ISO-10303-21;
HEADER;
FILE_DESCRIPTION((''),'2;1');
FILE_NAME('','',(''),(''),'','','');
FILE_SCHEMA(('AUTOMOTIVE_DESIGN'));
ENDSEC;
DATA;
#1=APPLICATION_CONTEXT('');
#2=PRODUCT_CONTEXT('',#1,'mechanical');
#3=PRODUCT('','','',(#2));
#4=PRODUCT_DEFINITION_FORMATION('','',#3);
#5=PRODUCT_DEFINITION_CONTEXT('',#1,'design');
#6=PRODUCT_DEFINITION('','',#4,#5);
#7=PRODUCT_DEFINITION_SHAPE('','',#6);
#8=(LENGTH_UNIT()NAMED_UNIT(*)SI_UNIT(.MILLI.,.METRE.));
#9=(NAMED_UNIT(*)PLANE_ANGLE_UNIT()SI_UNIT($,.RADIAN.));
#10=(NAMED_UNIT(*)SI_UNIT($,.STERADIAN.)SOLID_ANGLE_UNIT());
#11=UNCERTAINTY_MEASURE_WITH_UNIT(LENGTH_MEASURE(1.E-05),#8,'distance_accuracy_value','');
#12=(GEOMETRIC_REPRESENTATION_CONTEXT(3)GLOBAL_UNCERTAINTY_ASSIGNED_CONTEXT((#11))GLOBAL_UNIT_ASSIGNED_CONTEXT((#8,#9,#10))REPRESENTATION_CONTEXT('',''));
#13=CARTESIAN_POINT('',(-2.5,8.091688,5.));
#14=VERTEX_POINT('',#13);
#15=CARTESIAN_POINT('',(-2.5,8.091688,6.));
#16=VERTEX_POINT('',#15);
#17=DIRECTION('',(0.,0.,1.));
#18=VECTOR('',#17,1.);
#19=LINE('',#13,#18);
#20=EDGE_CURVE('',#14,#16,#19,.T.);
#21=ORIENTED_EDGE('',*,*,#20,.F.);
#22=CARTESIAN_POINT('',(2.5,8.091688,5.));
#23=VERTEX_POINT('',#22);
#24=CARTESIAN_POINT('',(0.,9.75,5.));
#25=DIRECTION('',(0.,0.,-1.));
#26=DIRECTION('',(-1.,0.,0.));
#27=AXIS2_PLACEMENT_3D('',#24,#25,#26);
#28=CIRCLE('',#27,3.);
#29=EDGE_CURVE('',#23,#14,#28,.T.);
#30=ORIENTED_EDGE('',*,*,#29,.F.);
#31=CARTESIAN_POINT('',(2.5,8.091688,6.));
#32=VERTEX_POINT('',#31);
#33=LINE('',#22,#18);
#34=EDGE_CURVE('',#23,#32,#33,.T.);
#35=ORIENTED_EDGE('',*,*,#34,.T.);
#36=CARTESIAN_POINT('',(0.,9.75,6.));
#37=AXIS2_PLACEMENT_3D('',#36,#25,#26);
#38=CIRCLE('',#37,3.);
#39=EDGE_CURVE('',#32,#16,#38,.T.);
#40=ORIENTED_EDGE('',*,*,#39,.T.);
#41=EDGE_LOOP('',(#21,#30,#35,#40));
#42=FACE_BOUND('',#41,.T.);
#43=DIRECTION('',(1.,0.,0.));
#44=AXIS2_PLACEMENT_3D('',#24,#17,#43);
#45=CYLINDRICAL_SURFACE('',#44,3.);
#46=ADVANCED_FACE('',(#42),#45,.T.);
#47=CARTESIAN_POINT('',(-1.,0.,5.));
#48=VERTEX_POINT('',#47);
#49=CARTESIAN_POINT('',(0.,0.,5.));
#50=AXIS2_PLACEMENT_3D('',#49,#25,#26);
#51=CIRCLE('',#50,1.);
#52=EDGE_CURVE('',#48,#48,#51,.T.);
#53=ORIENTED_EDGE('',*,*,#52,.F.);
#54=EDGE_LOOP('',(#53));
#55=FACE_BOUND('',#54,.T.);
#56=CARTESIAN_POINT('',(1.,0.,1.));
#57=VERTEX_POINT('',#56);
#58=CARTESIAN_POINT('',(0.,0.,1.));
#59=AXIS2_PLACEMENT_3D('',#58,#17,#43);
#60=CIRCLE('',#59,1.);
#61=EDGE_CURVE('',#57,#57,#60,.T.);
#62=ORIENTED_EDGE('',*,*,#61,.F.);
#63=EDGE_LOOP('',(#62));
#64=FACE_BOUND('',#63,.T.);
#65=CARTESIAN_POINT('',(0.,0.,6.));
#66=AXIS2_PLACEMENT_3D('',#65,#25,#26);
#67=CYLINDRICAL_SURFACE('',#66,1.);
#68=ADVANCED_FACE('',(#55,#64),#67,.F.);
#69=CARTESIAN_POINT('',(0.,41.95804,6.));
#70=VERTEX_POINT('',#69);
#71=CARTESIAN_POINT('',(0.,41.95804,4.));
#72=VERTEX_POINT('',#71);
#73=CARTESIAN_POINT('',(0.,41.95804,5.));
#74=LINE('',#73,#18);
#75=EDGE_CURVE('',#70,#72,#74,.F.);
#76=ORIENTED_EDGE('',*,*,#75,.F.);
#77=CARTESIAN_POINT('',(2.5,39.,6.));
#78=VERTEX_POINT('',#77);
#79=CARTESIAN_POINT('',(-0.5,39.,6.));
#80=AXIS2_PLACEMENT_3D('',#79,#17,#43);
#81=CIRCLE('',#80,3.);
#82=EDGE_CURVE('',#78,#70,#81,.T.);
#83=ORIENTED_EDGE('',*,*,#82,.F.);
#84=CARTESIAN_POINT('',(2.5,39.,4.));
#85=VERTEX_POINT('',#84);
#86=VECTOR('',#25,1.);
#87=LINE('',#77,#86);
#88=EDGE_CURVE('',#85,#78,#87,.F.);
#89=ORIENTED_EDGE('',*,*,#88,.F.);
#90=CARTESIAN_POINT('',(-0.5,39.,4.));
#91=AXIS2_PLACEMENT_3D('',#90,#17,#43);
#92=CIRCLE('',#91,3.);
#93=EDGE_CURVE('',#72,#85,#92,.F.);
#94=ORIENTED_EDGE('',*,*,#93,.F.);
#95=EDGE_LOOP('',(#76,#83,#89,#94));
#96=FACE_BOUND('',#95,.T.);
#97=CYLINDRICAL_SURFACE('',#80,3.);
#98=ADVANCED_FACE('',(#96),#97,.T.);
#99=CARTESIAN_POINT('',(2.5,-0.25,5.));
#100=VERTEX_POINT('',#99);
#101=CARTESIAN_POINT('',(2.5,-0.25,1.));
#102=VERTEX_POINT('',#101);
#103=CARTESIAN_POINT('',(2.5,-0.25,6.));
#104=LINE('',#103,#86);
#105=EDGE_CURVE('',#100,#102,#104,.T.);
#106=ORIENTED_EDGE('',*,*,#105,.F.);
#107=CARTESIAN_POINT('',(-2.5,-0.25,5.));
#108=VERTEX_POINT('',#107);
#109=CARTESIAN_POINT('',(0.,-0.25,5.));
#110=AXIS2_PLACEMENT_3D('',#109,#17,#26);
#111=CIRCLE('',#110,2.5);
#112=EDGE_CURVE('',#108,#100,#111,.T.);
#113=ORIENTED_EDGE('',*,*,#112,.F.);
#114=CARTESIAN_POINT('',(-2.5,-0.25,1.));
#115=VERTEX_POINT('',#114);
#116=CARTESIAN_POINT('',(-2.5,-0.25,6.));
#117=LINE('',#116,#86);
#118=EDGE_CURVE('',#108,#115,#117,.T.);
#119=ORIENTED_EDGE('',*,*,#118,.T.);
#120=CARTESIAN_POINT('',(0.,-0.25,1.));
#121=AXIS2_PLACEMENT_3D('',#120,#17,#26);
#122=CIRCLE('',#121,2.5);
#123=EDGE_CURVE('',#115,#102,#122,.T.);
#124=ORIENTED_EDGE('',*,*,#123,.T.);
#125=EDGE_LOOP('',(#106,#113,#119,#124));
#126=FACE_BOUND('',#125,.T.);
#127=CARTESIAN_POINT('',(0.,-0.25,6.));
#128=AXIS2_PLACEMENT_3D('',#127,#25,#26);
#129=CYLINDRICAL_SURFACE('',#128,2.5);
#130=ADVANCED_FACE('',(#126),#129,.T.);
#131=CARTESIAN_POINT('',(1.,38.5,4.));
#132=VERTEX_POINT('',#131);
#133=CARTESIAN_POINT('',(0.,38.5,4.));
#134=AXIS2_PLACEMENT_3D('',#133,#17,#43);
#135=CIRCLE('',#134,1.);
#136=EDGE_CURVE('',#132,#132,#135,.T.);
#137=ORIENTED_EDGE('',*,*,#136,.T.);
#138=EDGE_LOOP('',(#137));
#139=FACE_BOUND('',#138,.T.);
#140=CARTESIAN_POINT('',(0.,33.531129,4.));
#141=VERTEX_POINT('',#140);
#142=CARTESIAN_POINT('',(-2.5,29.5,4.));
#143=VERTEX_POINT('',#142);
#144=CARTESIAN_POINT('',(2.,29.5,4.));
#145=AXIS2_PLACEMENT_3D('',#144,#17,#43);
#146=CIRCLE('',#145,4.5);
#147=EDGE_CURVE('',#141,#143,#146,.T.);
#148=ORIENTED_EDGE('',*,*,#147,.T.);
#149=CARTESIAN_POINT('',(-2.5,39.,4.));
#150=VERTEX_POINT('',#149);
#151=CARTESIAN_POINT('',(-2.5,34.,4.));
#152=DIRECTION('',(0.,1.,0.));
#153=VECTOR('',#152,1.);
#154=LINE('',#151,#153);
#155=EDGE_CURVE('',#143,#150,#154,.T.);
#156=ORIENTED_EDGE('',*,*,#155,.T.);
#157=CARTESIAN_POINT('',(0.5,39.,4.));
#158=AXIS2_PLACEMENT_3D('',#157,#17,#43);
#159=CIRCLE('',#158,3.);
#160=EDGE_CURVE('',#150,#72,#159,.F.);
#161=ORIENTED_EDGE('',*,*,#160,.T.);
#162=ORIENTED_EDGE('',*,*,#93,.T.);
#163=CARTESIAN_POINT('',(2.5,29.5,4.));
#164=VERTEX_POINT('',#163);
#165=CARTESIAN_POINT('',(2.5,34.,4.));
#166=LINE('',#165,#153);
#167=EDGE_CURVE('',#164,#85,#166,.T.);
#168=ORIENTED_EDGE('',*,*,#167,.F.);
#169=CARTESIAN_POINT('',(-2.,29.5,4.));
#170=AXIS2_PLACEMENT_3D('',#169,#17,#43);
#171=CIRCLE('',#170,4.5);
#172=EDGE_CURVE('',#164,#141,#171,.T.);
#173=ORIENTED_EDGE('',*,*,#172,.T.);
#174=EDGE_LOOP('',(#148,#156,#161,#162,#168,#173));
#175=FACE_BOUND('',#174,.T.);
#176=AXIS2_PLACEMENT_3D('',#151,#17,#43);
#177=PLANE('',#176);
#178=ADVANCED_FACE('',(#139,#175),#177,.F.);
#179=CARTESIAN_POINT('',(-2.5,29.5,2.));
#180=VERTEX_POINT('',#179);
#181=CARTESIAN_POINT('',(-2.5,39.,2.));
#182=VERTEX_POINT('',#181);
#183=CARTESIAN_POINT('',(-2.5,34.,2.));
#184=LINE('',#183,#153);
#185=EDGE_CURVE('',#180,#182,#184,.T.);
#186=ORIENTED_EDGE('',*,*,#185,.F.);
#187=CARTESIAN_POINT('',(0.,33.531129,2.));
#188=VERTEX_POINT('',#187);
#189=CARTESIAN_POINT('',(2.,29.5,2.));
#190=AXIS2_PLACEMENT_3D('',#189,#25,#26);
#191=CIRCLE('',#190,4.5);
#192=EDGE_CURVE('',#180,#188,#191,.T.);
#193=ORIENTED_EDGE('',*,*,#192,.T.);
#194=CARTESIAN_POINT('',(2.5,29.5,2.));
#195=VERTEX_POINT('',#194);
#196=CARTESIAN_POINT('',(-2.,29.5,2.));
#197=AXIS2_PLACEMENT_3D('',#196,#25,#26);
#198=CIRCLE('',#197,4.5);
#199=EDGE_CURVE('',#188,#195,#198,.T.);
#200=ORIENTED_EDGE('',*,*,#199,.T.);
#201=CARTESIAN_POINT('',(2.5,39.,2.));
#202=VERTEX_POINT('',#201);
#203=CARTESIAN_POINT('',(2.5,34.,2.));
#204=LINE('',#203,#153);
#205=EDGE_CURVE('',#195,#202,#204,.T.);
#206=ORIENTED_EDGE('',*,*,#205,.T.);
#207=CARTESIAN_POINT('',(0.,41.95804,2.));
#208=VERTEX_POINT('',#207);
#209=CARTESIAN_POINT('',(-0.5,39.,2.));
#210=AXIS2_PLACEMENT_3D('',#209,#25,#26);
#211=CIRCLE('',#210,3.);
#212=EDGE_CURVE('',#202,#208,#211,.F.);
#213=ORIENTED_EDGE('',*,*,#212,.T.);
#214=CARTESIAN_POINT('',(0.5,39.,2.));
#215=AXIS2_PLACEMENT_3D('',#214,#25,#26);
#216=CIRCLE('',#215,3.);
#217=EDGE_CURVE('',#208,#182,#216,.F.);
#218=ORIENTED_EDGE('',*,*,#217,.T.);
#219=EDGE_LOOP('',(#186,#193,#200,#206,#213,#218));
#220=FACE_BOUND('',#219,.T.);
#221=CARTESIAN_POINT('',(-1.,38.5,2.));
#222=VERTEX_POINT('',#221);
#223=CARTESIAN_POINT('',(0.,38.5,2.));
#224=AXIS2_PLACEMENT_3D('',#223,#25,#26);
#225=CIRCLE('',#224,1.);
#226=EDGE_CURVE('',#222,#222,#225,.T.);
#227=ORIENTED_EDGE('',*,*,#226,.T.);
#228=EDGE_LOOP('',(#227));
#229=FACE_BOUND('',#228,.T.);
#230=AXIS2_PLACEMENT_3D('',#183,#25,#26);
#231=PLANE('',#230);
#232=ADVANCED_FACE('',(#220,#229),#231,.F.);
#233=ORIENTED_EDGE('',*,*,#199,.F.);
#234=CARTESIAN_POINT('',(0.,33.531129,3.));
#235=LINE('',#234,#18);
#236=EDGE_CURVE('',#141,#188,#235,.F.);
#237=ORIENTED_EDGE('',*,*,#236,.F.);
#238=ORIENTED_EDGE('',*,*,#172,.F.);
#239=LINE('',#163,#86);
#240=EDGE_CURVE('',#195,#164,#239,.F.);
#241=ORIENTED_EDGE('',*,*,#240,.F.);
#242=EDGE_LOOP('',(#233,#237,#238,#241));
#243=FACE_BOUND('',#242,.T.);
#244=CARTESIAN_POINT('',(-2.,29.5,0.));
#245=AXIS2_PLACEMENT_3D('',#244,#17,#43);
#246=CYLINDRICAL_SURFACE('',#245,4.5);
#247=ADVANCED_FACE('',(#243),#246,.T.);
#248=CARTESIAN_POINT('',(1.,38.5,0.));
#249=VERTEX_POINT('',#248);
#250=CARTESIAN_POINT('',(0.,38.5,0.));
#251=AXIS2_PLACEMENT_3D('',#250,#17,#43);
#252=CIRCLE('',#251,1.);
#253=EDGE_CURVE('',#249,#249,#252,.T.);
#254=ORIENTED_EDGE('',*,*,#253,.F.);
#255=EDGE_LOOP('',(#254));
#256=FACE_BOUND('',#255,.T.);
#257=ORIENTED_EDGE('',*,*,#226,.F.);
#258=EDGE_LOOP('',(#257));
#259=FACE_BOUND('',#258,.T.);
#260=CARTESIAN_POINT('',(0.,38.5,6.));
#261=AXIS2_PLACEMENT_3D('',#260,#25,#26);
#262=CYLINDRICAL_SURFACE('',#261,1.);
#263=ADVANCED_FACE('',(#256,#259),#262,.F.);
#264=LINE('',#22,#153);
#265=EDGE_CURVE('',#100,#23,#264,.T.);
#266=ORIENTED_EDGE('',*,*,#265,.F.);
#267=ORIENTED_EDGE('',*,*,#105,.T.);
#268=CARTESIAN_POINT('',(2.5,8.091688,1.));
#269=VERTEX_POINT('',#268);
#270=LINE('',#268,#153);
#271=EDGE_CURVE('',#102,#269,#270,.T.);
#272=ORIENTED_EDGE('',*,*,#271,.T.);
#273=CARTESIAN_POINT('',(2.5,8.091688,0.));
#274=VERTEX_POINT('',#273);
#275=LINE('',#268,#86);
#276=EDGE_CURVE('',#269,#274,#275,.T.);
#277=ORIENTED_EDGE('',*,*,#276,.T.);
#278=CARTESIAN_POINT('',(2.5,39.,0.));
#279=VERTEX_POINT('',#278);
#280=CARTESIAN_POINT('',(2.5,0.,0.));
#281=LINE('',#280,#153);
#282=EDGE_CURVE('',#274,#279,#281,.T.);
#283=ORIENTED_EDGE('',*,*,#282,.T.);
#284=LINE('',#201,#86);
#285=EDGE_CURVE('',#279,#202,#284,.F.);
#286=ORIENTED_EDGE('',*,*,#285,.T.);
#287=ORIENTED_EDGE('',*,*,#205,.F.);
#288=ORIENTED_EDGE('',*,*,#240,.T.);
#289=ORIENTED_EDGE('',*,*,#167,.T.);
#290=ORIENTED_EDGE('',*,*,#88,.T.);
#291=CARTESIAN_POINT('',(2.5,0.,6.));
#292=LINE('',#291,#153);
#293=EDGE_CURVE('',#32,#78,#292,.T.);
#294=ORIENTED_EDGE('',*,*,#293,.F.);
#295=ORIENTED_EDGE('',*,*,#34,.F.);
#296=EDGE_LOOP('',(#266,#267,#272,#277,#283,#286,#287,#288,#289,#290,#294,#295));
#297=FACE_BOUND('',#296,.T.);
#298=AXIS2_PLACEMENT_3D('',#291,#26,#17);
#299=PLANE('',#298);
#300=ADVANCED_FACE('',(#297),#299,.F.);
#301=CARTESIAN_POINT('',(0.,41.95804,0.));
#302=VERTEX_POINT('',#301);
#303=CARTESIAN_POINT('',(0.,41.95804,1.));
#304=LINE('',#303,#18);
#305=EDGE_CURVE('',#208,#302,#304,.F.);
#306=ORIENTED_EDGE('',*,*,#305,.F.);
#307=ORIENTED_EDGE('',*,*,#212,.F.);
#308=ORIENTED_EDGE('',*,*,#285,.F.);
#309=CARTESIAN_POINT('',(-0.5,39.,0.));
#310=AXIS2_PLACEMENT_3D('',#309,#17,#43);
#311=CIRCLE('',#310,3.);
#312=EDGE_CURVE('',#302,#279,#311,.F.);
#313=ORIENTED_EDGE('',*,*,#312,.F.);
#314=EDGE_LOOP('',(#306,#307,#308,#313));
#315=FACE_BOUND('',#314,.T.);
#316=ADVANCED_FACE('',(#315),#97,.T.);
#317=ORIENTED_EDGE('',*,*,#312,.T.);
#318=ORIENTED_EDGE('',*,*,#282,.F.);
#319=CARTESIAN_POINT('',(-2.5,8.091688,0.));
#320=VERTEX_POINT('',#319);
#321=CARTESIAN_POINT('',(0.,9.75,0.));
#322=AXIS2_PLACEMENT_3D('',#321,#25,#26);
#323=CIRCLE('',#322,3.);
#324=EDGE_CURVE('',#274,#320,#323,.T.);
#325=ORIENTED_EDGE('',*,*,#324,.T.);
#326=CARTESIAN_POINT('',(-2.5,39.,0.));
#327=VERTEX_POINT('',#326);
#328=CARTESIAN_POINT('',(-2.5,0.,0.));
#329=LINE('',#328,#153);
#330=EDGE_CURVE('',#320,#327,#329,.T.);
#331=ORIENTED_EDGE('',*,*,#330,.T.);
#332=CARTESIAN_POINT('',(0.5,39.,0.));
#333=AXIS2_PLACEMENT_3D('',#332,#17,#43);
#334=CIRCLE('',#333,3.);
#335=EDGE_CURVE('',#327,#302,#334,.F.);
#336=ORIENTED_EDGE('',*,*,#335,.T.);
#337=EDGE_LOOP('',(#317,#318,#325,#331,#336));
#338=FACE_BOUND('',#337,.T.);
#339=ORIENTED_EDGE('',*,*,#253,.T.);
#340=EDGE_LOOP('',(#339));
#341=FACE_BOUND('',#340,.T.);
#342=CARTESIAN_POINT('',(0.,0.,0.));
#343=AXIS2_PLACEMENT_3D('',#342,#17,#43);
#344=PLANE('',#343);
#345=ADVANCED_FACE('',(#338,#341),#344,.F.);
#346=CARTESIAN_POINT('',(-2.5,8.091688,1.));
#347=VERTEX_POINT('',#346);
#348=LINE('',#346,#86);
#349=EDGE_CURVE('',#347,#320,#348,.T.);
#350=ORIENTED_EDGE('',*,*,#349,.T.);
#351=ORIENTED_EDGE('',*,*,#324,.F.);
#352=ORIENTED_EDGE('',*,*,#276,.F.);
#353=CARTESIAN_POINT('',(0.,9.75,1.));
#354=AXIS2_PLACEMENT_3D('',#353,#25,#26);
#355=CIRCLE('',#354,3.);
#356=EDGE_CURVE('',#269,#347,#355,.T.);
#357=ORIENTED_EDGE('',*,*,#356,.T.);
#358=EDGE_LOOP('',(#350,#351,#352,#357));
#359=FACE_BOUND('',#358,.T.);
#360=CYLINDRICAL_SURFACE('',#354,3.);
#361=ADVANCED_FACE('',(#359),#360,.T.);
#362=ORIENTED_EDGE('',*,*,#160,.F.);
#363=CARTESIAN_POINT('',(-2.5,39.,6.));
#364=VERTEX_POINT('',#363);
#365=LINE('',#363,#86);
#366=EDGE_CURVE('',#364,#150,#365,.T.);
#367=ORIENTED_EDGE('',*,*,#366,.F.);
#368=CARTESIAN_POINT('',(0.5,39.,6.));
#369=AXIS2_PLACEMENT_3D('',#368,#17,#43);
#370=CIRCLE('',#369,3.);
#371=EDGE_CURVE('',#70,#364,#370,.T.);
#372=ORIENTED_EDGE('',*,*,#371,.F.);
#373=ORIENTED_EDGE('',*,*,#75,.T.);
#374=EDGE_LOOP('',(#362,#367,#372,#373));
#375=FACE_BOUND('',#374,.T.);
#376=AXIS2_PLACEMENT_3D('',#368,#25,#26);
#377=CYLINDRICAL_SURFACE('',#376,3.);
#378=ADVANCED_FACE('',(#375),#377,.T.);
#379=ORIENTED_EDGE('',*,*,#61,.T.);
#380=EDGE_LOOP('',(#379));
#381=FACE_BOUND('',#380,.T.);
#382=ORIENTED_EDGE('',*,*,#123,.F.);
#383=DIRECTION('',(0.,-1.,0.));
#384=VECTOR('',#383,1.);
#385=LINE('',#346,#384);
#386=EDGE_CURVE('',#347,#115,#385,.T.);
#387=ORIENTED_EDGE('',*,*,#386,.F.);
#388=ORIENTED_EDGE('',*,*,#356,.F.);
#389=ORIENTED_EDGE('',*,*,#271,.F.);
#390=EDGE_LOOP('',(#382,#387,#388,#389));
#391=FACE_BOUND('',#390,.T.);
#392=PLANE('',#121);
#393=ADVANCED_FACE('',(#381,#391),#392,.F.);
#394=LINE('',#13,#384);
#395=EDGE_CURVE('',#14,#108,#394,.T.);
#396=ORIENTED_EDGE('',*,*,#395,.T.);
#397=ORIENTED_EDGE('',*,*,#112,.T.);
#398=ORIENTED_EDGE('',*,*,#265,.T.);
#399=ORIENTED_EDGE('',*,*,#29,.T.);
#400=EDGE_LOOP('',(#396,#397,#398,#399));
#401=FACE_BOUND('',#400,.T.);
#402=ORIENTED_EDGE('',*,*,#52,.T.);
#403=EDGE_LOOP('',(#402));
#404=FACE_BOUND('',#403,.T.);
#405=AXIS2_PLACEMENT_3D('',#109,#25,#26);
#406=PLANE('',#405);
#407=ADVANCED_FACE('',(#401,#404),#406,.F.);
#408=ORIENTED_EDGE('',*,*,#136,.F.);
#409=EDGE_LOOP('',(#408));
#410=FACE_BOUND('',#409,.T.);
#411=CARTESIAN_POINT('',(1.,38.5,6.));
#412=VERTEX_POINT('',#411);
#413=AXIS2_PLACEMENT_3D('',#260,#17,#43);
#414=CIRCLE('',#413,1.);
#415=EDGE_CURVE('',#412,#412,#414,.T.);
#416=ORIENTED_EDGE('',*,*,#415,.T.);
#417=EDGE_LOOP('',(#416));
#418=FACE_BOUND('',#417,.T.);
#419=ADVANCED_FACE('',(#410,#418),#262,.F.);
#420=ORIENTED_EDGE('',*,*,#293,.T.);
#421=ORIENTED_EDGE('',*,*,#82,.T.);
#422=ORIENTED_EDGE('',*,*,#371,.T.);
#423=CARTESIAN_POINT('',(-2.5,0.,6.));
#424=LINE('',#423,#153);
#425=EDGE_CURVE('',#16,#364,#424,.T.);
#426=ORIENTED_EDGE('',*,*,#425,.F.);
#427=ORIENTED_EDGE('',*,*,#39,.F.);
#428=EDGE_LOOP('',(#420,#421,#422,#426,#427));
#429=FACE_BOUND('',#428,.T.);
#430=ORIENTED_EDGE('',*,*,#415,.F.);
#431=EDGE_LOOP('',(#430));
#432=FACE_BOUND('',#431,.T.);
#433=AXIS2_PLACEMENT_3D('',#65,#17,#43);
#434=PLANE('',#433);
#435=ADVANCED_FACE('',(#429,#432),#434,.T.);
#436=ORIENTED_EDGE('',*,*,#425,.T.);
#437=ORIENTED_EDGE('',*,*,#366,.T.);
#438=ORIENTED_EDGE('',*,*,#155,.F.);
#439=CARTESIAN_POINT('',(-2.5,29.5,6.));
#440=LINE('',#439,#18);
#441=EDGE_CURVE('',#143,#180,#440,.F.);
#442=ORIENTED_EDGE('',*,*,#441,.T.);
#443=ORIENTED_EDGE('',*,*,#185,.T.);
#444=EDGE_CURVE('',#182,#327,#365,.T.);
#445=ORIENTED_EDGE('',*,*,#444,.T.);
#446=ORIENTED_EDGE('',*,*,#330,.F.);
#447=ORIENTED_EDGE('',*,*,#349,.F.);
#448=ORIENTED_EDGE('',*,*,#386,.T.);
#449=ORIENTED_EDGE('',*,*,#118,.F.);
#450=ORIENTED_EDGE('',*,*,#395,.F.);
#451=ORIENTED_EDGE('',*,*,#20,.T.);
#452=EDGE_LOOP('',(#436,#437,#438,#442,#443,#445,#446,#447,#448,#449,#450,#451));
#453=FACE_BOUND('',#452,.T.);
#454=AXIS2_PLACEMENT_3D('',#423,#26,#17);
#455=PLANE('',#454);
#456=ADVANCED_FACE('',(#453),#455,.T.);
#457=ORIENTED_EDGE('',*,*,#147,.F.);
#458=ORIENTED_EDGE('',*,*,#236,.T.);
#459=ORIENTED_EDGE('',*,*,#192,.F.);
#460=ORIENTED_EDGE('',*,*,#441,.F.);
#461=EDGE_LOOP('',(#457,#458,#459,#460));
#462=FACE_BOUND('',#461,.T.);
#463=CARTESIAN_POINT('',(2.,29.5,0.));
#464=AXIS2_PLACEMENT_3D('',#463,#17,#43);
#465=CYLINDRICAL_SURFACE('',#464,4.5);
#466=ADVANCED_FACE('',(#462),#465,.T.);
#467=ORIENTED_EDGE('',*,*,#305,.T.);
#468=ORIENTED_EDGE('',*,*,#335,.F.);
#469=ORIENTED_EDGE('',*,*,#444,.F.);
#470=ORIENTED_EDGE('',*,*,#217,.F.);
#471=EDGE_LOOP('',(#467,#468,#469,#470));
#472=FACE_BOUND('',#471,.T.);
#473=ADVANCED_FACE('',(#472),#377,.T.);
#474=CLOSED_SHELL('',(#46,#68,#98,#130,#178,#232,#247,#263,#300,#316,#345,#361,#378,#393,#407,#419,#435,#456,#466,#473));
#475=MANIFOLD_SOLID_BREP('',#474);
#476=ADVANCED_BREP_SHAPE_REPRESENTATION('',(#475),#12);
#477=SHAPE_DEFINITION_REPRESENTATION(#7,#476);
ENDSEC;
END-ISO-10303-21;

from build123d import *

# Parameters (mm, degrees)
CROQUIS1_R              = 1
SALIENTE_EXTRUIR1_DEPTH = 6
CROQUIS2_W              = 5
CROQUIS2_H              = 2
CORTAR_EXTRUIR1_DEPTH   = 8
REDONDEO1_R             = 4.5
REDONDEO2_R             = 3
CORTAR_EXTRUIR3_START   = -1
CORTAR_EXTRUIR3_DEPTH   = 1


with BuildPart() as part:
    # Croquis1 → Saliente-Extruir1 (new body)
    # profile 1 of 2: a face of its own
    with BuildSketch(Plane.XY):
        with BuildLine():
            Line((-0.968245837, -0.25), (-2.5, -0.25))
            ThreePointArc((-2.5, -0.25), (0, -2.75), (2.5, -0.25))
            Line((2.5, -0.25), (0.968245837, -0.25))
            ThreePointArc((0.968245837, -0.25), (0, -1), (-0.968245837, -0.25))
        make_face()
    # profile 2 of 2: a face of its own
    with BuildSketch(Plane.XY):
        with BuildLine():
            Line((-2.5, -0.25), (-0.968245837, -0.25))
            ThreePointArc((-0.968245837, -0.25), (0, 1), (0.968245837, -0.25))
            Line((0.968245837, -0.25), (2.5, -0.25))
            Line((2.5, -0.25), (2.5, 42))
            Line((2.5, 42), (-2.5, 42))
            Line((-2.5, 42), (-2.5, -0.25))
        make_face()
        with Locations((0, 38.5)):
            Circle(CROQUIS1_R, mode=Mode.SUBTRACT)
    extrude(amount=SALIENTE_EXTRUIR1_DEPTH)

    # Croquis2 → Cortar-Extruir1 (cut)
    with BuildSketch(Plane(origin=(0, 42, 0), x_dir=(1, 0, 0), z_dir=(0, 1, 0))):
        with Locations((0, -3)):
            Rectangle(CROQUIS2_W, CROQUIS2_H)
    extrude(amount=-CORTAR_EXTRUIR1_DEPTH, mode=Mode.SUBTRACT)

    # Redondeo1
    # the kernel refuses this fillet: 4.5 mm, written as the material it takes off along each edge
    with BuildSketch(Plane(origin=(-2.5, 34, 4), x_dir=(0, -1, 0), z_dir=(0, 0, -1)), Plane(origin=(2.5, 34, 2), x_dir=(0, -1, 0), z_dir=(0, 0, 1))) as redondeo1_piece_1:
        with BuildLine():
            CenterArc((REDONDEO1_R, -REDONDEO1_R), REDONDEO1_R, 90, 90)
            Line((0, -REDONDEO1_R), (0, 0))
            Line((0, 0), (REDONDEO1_R, 0))
        make_face()
    extrude(amount=2, mode=Mode.SUBTRACT)

    # Redondeo2
    # the kernel refuses this fillet: 3 mm, written as the material it takes off along each edge
    with BuildSketch(Plane(origin=(-2.5, 42, -3.5), x_dir=(0, -1, 0), z_dir=(0, 0, 1)), Plane(origin=(2.5, 42, -7.5), x_dir=(-1, 0, 0), z_dir=(0, 0, 1)), Plane(origin=(2.5, 42, -3.5), x_dir=(-1, 0, 0), z_dir=(0, 0, 1))) as redondeo2_piece_1:
        with BuildLine():
            CenterArc((REDONDEO2_R, REDONDEO2_R), REDONDEO2_R, 180, 90)
            Line((0, REDONDEO2_R), (0, 0))
            Line((0, 0), (REDONDEO2_R, 0))
        make_face()
    extrude(amount=17, mode=Mode.SUBTRACT)
    with BuildSketch(Plane(origin=(-2.5, 42, -7.5), x_dir=(1, 0, 0), z_dir=(0, 0, 1))) as redondeo2_piece_2:
        with BuildLine():
            CenterArc((REDONDEO2_R, -REDONDEO2_R), REDONDEO2_R, 90, 90)
            Line((0, -REDONDEO2_R), (0, 0))
            Line((0, 0), (REDONDEO2_R, 0))
        make_face()
    extrude(amount=17, mode=Mode.SUBTRACT)

    # Croquis4 → Cortar-Extruir3 (cut)
    with BuildSketch(Plane.XY.offset(6).offset(CORTAR_EXTRUIR3_START)):
        with BuildLine():
            Line((-2.5, 8.091687605), (-2.5, -0.25))
            ThreePointArc((-2.5, -0.25), (0, -2.75), (2.5, -0.25))
            Line((2.5, -0.25), (2.5, 8.091687605))
            ThreePointArc((2.5, 8.091687605), (0, 6.75), (-2.5, 8.091687605))
        make_face()
    cortar_extruir3 = extrude(amount=CORTAR_EXTRUIR3_DEPTH, mode=Mode.SUBTRACT)

    # Simetría1: Cortar-Extruir3 across plane
    add(cortar_extruir3.mirror(Plane.XY.offset(3)), mode=Mode.SUBTRACT)


solid = part.part
